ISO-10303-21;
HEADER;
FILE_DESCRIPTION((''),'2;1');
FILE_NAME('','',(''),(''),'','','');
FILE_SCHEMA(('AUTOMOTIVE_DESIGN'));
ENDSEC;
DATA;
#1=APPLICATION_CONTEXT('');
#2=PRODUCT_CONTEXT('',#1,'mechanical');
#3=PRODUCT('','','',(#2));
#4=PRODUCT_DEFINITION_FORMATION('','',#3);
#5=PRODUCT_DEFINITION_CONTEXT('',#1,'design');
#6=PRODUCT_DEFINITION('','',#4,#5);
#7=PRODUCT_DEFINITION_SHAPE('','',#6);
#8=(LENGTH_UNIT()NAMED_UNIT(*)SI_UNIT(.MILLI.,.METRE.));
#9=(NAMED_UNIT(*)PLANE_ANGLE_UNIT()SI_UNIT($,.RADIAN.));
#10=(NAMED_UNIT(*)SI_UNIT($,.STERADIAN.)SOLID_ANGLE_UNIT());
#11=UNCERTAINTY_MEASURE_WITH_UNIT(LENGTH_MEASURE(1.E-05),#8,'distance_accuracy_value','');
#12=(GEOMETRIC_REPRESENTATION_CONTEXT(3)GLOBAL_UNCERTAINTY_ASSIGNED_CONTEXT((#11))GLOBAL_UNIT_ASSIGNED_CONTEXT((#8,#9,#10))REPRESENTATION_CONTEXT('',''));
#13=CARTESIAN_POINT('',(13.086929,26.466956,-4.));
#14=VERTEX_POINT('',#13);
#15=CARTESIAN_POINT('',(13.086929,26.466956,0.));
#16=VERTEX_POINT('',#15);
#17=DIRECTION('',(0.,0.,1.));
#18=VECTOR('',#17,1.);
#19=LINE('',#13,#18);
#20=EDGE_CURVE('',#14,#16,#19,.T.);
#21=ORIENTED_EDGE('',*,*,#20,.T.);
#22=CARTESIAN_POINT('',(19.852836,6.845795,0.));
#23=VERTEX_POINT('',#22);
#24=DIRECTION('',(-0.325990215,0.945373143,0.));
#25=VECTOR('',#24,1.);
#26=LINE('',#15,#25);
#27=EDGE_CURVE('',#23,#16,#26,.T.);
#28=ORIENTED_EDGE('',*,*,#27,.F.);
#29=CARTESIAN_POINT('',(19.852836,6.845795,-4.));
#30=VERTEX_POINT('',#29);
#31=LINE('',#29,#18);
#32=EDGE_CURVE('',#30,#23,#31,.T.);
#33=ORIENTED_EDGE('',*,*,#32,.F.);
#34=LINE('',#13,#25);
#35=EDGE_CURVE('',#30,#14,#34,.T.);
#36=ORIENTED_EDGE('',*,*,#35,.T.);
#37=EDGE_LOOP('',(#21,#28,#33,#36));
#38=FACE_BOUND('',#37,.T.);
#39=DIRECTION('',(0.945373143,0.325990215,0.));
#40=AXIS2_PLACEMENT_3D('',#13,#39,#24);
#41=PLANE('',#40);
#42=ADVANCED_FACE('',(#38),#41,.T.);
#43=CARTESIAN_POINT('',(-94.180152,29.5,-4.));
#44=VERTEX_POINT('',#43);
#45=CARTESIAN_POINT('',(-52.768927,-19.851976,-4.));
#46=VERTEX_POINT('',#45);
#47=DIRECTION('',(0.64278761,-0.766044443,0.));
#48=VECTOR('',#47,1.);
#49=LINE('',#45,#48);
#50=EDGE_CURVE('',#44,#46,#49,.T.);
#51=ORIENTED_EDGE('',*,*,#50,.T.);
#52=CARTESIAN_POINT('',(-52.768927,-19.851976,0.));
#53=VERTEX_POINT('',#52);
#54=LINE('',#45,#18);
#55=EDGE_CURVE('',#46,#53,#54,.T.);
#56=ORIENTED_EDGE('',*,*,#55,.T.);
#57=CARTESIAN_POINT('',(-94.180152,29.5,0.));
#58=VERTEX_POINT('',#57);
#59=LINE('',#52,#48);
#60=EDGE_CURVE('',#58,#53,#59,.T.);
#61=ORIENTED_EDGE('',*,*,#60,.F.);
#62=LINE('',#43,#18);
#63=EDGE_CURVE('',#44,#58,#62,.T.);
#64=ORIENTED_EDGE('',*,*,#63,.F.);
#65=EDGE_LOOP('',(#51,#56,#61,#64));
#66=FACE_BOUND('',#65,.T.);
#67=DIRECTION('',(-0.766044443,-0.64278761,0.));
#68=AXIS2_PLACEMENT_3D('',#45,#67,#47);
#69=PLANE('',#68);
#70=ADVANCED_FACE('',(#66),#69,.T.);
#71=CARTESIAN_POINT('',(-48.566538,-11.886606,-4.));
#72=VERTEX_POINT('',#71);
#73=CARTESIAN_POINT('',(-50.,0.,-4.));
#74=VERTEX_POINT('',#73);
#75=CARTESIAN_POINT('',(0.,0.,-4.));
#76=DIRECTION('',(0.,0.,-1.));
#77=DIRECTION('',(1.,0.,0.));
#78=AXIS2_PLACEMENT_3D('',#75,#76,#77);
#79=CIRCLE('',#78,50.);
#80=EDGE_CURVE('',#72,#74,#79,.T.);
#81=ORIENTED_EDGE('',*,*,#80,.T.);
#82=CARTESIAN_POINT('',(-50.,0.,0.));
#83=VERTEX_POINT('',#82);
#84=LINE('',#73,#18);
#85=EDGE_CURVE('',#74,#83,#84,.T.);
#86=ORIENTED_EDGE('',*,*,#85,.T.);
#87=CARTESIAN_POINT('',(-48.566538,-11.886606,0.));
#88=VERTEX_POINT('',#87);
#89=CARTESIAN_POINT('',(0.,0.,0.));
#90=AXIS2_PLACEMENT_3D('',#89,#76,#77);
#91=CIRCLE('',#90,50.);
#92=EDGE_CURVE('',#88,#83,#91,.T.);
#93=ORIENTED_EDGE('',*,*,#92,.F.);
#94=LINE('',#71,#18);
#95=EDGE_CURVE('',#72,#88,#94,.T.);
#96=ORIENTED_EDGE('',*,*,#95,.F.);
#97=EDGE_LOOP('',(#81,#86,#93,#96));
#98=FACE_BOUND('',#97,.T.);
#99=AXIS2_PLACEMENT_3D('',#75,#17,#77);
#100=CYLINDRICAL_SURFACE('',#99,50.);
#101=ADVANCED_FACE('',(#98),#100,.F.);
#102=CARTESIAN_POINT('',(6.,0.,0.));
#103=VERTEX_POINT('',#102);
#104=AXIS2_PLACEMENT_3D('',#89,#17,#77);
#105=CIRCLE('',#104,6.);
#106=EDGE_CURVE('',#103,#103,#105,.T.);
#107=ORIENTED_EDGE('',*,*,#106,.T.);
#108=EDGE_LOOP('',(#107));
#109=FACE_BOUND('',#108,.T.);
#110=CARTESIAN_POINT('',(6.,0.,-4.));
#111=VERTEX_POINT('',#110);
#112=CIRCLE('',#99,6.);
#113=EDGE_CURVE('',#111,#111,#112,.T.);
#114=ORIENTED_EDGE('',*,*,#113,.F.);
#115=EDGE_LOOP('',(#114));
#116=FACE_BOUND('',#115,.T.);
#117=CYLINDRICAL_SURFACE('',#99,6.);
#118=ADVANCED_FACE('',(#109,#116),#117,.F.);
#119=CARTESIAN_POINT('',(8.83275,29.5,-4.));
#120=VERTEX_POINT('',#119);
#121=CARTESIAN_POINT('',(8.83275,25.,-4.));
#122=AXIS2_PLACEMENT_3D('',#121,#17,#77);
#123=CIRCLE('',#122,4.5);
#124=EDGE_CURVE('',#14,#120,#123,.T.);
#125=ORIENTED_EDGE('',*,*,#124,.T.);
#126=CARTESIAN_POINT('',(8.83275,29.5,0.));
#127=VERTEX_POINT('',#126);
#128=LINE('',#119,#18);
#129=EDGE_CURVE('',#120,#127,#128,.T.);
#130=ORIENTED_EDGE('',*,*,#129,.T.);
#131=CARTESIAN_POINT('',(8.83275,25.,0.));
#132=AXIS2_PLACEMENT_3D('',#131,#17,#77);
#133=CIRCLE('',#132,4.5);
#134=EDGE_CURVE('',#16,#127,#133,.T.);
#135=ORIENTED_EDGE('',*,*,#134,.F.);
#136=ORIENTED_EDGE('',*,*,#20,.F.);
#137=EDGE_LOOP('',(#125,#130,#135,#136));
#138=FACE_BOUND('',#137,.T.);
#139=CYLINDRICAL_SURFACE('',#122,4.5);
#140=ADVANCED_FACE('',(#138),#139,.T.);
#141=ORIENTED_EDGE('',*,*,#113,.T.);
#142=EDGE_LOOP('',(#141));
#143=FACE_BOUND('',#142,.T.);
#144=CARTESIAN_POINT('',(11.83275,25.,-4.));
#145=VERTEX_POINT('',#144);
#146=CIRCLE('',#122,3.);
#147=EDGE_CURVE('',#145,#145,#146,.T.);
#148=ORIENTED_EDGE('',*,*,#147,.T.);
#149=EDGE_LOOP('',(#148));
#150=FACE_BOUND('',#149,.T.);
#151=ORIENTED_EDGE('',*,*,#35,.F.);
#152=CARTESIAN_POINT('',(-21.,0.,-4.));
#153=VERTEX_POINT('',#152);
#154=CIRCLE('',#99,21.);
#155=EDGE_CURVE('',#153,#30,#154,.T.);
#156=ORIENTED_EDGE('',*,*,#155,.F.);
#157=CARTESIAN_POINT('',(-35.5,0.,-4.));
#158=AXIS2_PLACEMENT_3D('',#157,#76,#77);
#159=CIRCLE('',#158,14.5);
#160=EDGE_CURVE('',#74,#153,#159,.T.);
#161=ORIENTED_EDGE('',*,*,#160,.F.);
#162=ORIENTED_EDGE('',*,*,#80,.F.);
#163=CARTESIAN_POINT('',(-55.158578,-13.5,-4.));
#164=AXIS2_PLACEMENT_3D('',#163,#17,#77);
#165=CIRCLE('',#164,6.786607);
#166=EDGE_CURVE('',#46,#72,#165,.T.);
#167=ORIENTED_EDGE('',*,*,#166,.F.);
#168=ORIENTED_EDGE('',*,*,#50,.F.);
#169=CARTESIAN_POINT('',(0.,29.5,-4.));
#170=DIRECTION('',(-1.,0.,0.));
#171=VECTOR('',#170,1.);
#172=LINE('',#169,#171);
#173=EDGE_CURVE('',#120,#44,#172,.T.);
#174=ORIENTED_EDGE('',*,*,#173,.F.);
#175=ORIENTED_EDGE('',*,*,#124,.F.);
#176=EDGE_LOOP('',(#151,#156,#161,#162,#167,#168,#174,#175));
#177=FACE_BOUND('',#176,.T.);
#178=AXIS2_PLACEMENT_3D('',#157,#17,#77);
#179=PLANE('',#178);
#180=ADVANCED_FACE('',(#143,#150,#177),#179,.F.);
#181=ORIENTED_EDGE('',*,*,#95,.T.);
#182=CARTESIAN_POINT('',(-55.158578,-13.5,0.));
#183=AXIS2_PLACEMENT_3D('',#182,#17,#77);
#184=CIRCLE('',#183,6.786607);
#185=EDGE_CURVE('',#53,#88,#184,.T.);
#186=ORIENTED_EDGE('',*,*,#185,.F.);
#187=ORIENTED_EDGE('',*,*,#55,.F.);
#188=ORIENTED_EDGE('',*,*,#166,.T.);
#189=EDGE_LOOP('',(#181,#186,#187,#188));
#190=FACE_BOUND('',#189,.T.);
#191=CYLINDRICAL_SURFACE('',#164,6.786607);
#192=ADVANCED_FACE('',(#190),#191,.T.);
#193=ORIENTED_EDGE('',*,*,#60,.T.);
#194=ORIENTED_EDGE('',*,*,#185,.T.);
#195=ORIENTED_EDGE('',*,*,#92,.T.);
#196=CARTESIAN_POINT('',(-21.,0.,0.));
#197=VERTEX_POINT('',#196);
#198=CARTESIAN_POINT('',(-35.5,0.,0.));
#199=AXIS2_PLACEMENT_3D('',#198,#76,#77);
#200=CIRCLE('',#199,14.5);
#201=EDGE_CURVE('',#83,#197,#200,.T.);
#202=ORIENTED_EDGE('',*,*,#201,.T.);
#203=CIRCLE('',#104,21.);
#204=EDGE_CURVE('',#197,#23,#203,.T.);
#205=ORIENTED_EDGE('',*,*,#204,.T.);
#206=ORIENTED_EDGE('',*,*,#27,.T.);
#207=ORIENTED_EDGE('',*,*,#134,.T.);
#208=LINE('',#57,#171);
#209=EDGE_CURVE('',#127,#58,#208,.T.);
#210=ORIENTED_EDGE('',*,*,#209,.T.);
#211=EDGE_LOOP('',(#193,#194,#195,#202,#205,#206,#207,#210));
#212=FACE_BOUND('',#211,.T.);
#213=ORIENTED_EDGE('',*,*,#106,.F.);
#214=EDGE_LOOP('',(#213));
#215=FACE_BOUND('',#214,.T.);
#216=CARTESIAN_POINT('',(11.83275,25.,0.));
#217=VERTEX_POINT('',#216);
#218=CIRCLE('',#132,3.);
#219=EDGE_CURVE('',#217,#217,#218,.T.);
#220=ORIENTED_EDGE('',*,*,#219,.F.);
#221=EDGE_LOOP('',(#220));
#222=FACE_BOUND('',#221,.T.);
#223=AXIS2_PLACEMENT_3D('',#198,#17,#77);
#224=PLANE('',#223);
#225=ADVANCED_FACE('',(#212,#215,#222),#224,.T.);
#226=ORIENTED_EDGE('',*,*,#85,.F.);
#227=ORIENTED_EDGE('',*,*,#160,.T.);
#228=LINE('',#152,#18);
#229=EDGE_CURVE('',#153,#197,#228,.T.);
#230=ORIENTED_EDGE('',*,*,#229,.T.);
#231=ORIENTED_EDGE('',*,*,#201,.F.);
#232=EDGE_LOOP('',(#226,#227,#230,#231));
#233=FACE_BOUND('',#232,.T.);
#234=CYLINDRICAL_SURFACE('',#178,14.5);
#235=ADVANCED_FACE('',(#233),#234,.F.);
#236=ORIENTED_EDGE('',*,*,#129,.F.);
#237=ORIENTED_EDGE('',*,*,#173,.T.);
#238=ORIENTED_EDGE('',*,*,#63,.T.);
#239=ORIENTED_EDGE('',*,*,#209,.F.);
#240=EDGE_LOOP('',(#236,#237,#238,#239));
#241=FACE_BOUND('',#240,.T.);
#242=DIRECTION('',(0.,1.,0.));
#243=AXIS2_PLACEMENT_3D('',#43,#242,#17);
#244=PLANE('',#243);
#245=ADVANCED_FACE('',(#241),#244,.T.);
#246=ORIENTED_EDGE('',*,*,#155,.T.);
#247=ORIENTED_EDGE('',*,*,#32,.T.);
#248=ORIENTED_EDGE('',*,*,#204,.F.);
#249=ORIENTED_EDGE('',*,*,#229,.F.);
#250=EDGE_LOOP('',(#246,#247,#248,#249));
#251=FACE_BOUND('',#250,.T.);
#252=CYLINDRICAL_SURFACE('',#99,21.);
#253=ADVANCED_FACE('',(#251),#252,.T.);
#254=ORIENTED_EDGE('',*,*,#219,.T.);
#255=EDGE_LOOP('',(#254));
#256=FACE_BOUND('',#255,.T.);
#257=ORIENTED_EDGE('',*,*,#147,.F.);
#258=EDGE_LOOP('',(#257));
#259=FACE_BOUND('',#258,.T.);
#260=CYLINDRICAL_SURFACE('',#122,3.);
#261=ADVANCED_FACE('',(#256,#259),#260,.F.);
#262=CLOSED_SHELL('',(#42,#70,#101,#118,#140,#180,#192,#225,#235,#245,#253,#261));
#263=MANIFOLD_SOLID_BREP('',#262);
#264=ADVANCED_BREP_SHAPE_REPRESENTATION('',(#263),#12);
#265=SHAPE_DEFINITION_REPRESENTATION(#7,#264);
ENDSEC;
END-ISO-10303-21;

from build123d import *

# Parameters (mm, degrees)
SKETCH_1_R             = 6
SKETCH_1_R_2           = 3
SM_BASE_FLANGE_1_DEPTH = 4


# Sheet-metal steps are written as plain solids
with BuildPart() as part:
    # Sketch 1 → Базовая кромка1 (new body)
    with BuildSketch(Plane.XY):
        with BuildLine():
            Line((-94.18015229, 29.5), (0, 29.5))
            Line((0, 29.5), (8.832749987, 29.5))
            ThreePointArc((8.832749987, 29.5), (11.445095498, 28.664103019), (13.086929131, 26.466955969))
            Line((13.086929131, 26.466955969), (19.852836003, 6.845794522))
            ThreePointArc((19.852836003, 6.845794522), (3.470622706, -20.71122348), (-21, 0))
            ThreePointArc((-21, 0), (-35.5, 14.5), (-50, 0))
            ThreePointArc((-50, 0), (-49.640340933, -5.986363846), (-48.566537916, -11.88660569))
            ThreePointArc((-48.566537916, -11.88660569), (-49.156122287, -16.666789945), (-52.76892738, -19.85197606))
            Line((-52.76892738, -19.85197606), (-94.18015229, 29.5))
        make_face()
        Circle(SKETCH_1_R, mode=Mode.SUBTRACT)
        with Locations((8.832749987, 25)):
            Circle(SKETCH_1_R_2, mode=Mode.SUBTRACT)
    extrude(amount=-SM_BASE_FLANGE_1_DEPTH)


solid = part.part
